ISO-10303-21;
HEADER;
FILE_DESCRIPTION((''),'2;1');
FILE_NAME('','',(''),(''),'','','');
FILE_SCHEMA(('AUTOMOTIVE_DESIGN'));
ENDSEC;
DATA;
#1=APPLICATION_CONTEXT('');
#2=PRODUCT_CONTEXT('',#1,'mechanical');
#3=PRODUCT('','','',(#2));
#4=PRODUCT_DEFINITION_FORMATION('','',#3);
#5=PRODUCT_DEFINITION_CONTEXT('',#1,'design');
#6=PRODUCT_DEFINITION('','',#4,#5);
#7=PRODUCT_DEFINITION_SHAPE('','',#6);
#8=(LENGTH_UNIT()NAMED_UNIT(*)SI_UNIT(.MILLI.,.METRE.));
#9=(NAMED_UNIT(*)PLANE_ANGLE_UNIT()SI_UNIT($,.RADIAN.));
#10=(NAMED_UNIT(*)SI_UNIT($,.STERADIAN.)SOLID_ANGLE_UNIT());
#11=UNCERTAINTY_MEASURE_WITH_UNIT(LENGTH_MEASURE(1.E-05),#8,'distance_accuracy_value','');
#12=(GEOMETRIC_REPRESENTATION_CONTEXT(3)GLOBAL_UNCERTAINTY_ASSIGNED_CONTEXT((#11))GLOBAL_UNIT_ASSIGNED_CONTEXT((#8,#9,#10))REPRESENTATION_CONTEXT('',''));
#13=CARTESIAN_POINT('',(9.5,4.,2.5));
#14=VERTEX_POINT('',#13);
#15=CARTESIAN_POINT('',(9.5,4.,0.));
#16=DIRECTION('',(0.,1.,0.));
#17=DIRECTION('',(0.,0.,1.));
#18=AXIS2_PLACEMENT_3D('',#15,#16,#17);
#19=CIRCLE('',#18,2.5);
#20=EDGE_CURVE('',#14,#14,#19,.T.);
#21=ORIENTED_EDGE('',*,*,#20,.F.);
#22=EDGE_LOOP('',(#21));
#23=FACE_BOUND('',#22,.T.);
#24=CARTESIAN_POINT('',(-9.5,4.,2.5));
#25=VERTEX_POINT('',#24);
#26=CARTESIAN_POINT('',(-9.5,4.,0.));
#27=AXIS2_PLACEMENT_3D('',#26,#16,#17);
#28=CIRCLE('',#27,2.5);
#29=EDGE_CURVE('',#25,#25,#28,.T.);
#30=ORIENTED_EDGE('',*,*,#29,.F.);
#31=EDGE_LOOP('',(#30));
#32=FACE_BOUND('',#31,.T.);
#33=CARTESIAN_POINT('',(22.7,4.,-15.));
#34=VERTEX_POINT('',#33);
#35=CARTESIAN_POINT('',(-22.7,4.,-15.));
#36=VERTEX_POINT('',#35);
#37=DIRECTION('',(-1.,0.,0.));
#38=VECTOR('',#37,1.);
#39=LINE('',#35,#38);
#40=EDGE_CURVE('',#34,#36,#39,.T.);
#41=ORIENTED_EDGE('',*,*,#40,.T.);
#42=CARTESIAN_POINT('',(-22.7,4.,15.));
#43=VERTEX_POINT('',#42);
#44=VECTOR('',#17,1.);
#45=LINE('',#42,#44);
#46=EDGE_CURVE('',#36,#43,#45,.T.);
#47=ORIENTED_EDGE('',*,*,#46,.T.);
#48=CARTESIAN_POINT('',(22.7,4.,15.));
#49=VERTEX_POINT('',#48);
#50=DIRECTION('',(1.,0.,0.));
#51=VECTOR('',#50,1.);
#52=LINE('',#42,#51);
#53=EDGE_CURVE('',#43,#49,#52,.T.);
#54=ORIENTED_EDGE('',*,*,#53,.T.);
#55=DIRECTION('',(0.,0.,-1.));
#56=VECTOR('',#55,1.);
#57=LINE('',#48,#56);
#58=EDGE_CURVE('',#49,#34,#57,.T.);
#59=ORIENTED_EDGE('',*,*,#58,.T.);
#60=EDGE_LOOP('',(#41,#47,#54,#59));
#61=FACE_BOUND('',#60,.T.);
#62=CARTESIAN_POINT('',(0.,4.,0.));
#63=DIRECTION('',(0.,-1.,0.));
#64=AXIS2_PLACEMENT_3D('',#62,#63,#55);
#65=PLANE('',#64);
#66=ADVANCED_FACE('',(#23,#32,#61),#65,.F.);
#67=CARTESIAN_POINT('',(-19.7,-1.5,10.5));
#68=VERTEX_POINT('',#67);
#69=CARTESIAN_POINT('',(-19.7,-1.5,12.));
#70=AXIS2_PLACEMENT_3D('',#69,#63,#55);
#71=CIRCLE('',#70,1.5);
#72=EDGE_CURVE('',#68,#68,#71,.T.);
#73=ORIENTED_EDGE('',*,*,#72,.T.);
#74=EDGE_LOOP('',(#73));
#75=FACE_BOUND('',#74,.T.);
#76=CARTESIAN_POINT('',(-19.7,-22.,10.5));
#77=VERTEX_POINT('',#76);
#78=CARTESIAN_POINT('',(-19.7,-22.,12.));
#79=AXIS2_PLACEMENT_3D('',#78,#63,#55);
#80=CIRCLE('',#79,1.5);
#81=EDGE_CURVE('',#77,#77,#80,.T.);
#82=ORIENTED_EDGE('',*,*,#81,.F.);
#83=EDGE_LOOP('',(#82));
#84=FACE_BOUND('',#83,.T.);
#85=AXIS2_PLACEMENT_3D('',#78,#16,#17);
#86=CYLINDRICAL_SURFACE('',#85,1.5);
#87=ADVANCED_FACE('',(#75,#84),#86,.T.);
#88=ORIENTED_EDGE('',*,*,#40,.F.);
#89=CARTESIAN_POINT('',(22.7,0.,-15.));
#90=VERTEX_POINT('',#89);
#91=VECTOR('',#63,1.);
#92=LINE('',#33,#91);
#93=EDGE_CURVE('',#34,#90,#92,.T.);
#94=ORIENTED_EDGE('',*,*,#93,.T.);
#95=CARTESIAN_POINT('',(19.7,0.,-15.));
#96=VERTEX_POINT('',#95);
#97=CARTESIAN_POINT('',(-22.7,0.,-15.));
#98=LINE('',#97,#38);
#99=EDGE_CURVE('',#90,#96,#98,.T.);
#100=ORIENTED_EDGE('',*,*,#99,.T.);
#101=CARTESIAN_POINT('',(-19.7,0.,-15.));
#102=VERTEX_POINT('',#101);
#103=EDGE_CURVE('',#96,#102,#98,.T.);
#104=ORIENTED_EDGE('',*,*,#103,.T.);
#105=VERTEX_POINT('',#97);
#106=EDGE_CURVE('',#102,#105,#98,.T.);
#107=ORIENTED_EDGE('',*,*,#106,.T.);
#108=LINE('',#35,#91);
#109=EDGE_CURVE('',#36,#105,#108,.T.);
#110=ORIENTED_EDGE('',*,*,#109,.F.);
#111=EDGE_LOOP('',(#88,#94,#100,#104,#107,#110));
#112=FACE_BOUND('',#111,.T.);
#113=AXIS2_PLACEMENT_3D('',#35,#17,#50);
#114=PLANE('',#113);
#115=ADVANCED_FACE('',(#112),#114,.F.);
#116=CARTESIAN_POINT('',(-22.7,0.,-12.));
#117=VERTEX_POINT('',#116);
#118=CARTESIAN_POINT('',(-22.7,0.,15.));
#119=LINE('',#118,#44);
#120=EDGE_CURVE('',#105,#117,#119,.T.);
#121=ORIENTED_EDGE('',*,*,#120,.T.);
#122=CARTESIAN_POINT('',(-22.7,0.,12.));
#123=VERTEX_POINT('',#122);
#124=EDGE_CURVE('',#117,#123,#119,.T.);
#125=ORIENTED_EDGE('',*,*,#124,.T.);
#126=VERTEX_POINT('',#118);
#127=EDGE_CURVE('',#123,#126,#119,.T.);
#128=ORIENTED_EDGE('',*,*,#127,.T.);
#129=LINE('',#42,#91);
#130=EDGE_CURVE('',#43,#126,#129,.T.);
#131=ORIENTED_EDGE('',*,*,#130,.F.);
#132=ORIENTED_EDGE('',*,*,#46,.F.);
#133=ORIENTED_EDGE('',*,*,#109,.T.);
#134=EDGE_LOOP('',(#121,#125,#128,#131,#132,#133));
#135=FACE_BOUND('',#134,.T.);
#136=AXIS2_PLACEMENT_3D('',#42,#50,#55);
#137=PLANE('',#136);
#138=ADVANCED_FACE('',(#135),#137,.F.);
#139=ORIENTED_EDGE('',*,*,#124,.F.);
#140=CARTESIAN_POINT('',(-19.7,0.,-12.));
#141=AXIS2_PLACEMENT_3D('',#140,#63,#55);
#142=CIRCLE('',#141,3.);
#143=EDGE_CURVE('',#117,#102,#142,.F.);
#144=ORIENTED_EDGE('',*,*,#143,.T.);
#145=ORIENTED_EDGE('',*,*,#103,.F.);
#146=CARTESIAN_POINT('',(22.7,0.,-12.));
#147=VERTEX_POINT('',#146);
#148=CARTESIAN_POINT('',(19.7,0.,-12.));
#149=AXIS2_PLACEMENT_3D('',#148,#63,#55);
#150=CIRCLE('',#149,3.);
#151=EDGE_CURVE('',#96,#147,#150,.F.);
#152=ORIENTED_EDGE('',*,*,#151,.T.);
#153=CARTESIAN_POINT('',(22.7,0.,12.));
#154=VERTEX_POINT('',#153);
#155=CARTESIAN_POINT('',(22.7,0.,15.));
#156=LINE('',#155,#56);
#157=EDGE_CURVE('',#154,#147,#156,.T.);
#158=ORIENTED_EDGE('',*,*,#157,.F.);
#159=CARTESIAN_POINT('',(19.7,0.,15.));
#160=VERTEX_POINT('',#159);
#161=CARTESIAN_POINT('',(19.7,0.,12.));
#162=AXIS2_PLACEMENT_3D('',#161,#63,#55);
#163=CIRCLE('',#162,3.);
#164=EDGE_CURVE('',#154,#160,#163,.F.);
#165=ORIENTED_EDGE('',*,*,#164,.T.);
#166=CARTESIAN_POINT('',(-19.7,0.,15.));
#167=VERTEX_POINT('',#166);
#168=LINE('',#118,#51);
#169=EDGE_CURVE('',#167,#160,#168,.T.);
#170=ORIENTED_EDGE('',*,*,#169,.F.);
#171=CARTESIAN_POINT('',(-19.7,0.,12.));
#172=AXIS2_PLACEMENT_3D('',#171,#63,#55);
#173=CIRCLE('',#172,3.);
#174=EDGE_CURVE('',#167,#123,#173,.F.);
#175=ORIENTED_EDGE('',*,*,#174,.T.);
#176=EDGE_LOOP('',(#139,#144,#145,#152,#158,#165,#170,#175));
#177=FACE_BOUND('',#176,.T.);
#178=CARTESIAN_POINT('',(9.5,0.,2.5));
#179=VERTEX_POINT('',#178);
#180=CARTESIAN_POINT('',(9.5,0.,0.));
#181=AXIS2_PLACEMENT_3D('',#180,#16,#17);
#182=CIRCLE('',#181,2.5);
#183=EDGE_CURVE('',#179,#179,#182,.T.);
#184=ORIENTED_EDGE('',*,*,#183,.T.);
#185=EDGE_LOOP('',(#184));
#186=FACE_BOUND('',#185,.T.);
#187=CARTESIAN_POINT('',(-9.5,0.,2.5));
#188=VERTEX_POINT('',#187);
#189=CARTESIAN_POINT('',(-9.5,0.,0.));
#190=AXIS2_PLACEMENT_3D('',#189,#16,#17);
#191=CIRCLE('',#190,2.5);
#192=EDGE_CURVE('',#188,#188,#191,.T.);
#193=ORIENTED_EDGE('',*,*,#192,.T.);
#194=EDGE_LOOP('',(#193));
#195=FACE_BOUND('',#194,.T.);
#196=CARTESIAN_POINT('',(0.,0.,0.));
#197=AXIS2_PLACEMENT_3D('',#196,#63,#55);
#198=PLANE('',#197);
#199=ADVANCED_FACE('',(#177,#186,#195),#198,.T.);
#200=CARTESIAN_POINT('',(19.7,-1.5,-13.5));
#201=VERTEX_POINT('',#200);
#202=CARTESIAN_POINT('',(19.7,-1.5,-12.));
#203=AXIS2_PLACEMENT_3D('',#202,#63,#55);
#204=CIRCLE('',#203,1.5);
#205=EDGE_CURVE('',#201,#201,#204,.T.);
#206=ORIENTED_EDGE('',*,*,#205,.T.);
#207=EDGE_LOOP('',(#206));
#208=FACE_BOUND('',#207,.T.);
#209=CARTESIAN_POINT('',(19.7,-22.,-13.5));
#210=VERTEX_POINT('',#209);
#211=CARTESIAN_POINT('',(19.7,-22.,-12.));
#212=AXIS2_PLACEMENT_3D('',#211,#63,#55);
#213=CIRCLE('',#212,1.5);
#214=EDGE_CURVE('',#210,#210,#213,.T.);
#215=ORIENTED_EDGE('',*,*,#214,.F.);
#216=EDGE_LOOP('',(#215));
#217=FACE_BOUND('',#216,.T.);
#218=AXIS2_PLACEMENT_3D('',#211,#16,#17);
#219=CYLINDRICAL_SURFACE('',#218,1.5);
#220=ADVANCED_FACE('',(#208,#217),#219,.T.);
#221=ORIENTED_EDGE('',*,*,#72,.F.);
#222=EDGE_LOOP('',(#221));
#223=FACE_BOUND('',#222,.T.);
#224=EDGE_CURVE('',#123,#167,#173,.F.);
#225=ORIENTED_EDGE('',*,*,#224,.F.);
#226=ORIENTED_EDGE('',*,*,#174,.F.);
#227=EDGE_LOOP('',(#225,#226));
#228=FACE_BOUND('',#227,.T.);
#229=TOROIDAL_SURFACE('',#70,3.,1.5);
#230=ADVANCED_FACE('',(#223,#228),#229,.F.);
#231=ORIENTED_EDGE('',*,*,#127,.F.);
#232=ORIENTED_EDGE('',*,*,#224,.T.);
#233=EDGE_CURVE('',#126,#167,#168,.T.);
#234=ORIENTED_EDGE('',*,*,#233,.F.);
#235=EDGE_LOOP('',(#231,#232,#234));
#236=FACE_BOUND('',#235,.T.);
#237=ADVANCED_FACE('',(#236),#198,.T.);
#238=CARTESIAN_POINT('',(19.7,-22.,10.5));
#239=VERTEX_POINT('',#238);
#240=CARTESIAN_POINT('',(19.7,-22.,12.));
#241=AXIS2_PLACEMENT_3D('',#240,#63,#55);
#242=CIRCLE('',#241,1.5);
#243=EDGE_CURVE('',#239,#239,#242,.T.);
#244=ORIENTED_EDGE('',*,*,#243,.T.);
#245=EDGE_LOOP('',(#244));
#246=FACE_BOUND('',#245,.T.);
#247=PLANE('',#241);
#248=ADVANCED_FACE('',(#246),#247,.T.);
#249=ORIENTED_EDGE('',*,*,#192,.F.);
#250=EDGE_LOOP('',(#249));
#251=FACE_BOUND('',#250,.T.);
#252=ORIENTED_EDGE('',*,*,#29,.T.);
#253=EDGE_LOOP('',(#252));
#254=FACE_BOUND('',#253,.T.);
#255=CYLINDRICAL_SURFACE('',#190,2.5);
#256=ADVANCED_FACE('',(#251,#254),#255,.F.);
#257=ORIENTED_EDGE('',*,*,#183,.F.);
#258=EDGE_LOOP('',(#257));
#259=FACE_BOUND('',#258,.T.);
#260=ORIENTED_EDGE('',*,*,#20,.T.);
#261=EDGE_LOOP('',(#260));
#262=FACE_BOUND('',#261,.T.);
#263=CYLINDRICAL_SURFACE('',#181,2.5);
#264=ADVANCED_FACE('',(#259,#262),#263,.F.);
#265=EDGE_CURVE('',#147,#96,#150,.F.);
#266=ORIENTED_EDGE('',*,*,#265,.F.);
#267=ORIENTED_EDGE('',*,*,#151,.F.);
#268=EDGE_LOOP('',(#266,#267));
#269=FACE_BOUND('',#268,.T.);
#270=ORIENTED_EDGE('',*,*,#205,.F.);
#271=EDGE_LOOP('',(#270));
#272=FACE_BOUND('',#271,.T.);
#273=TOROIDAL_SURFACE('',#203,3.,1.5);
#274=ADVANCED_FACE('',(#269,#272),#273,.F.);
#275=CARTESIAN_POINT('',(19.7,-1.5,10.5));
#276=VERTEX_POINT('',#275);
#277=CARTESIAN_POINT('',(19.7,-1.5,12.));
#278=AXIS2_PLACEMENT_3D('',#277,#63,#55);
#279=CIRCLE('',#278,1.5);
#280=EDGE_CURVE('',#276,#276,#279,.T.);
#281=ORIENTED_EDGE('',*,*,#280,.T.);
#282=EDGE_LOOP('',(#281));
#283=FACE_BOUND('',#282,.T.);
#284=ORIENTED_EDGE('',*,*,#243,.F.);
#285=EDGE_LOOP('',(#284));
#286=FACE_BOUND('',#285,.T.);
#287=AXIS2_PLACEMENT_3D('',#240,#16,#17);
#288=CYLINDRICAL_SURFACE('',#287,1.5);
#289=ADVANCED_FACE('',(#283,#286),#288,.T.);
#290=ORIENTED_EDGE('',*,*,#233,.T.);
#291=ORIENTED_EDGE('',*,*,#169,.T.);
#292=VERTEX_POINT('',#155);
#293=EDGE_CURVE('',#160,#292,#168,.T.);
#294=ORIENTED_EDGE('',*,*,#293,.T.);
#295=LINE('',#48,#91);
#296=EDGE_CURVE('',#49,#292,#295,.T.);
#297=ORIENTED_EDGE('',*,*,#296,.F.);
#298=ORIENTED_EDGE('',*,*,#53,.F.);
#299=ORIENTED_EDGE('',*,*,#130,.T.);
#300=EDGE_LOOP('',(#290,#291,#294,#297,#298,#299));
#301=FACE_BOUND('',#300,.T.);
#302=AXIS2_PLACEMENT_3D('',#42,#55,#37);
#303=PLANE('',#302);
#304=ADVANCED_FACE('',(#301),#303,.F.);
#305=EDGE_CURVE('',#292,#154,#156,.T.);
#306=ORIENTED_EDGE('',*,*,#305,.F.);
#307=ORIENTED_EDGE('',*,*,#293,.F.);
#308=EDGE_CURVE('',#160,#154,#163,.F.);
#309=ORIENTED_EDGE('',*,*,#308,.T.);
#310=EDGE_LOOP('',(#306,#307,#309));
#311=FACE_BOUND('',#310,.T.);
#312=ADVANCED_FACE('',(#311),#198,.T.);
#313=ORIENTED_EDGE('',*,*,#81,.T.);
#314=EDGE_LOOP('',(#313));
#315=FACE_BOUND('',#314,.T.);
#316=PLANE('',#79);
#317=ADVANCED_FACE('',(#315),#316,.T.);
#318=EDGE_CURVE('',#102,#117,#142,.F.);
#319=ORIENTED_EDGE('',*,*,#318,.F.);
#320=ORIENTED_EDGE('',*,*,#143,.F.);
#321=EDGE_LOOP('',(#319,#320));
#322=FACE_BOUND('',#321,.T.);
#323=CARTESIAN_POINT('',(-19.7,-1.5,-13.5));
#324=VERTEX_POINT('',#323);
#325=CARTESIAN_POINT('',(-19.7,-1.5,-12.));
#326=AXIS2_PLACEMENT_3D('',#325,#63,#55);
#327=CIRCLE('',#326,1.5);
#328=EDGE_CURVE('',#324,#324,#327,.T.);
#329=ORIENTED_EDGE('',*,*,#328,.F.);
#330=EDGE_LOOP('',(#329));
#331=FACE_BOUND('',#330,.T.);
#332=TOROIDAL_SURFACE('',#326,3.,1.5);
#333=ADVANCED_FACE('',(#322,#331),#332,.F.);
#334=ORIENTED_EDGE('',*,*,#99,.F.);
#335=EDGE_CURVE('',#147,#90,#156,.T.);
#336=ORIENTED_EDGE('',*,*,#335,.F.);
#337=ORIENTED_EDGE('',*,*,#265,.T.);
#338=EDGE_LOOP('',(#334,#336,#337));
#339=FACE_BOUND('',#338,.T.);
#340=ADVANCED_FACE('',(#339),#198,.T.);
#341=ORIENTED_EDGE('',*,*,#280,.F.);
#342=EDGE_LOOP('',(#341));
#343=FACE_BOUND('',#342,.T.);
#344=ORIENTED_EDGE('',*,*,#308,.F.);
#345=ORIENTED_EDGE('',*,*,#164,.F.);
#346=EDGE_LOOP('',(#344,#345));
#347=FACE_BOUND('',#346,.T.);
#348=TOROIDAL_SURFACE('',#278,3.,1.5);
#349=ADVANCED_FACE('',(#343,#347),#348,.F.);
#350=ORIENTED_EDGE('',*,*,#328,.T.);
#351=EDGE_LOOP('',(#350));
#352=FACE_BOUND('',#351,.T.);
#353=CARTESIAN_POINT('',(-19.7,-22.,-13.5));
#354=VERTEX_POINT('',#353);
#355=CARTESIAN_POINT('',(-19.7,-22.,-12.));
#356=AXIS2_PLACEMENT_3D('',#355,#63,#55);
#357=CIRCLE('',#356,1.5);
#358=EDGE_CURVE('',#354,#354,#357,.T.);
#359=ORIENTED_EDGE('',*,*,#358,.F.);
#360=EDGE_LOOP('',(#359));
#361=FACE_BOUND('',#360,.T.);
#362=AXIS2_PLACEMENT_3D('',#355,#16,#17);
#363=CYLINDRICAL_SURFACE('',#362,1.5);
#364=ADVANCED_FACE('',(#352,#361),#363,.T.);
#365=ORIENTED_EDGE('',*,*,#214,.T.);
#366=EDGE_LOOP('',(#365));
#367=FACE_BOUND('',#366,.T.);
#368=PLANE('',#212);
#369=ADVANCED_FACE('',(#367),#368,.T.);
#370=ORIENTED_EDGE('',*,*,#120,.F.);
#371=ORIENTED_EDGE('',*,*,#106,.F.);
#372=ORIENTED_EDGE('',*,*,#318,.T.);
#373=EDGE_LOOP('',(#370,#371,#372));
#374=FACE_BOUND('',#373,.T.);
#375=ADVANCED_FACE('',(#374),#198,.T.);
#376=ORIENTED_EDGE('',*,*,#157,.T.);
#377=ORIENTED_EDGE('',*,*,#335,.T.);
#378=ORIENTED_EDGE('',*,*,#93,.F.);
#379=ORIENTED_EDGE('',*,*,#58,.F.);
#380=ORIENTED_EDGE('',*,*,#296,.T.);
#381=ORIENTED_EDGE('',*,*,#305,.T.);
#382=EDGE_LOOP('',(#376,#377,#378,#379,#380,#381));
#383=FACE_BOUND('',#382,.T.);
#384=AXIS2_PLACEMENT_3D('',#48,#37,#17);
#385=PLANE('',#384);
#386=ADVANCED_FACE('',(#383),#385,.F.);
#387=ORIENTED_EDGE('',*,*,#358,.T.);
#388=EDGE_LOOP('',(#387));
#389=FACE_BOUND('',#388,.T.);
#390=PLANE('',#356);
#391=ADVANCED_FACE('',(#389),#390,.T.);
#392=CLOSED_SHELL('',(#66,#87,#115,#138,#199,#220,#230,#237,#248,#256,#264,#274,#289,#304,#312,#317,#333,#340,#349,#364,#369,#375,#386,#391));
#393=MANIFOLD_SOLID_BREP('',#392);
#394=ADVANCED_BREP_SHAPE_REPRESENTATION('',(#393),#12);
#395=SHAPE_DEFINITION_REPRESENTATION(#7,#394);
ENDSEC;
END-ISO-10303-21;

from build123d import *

# Parameters (mm, degrees)
SKETCH1_W           = 45.4
SKETCH1_H           = 30
BOSS_EXTRUDE1_DEPTH = 4
SKETCH2_R           = 2.5
CUT_EXTRUDE1_DEPTH  = 28.500727263
SKETCH3_R           = 1.5
BOSS_EXTRUDE2_DEPTH = 22
FILLET1_R           = 1.5


with BuildPart() as part:
    # Sketch1 → Boss-Extrude1 (new body)
    with BuildSketch(Plane(origin=(0, 0, 0), x_dir=(1, 0, 0), z_dir=(0, 1, 0))):
        Rectangle(SKETCH1_W, SKETCH1_H)
    extrude(amount=BOSS_EXTRUDE1_DEPTH)

    # Sketch2 → Cut-Extrude1 (cut, through all)
    with BuildSketch(Plane(origin=(0, 4, 0), x_dir=(1, 0, 0), z_dir=(0, 1, 0))):
        with Locations(Location((-9.5, 0, 0), (0, 0, 270))):
            Circle(SKETCH2_R)
        with Locations(Location((9.5, 0, 0), (0, 0, 270))):
            Circle(SKETCH2_R)
    extrude(amount=-CUT_EXTRUDE1_DEPTH, mode=Mode.SUBTRACT)

    # Sketch3 → Boss-Extrude2 (add)
    with BuildSketch(Plane.XZ):
        with Locations(Location((-19.7, 12, 0), (0, 0, 270))):
            Circle(SKETCH3_R)
        with Locations(Location((19.7, 12, 0), (0, 0, 270))):
            Circle(SKETCH3_R)
        with Locations(Location((-19.7, -12, 0), (0, 0, 270))):
            Circle(SKETCH3_R)
        with Locations(Location((19.7, -12, 0), (0, 0, 270))):
            Circle(SKETCH3_R)
    extrude(amount=BOSS_EXTRUDE2_DEPTH)

    # Fillet1
    fillet1_edges = [part.edges().sort_by_distance(p)[0] for p in [
        (-19.7, 0, 13.5),
        (19.7, 0, 13.5),
        (-19.7, 0, -10.5),
        (19.7, 0, -10.5),
    ]]
    fillet(fillet1_edges, radius=FILLET1_R - 0.0001)  # a hair under: the kernel refuses the full size


solid = part.part
